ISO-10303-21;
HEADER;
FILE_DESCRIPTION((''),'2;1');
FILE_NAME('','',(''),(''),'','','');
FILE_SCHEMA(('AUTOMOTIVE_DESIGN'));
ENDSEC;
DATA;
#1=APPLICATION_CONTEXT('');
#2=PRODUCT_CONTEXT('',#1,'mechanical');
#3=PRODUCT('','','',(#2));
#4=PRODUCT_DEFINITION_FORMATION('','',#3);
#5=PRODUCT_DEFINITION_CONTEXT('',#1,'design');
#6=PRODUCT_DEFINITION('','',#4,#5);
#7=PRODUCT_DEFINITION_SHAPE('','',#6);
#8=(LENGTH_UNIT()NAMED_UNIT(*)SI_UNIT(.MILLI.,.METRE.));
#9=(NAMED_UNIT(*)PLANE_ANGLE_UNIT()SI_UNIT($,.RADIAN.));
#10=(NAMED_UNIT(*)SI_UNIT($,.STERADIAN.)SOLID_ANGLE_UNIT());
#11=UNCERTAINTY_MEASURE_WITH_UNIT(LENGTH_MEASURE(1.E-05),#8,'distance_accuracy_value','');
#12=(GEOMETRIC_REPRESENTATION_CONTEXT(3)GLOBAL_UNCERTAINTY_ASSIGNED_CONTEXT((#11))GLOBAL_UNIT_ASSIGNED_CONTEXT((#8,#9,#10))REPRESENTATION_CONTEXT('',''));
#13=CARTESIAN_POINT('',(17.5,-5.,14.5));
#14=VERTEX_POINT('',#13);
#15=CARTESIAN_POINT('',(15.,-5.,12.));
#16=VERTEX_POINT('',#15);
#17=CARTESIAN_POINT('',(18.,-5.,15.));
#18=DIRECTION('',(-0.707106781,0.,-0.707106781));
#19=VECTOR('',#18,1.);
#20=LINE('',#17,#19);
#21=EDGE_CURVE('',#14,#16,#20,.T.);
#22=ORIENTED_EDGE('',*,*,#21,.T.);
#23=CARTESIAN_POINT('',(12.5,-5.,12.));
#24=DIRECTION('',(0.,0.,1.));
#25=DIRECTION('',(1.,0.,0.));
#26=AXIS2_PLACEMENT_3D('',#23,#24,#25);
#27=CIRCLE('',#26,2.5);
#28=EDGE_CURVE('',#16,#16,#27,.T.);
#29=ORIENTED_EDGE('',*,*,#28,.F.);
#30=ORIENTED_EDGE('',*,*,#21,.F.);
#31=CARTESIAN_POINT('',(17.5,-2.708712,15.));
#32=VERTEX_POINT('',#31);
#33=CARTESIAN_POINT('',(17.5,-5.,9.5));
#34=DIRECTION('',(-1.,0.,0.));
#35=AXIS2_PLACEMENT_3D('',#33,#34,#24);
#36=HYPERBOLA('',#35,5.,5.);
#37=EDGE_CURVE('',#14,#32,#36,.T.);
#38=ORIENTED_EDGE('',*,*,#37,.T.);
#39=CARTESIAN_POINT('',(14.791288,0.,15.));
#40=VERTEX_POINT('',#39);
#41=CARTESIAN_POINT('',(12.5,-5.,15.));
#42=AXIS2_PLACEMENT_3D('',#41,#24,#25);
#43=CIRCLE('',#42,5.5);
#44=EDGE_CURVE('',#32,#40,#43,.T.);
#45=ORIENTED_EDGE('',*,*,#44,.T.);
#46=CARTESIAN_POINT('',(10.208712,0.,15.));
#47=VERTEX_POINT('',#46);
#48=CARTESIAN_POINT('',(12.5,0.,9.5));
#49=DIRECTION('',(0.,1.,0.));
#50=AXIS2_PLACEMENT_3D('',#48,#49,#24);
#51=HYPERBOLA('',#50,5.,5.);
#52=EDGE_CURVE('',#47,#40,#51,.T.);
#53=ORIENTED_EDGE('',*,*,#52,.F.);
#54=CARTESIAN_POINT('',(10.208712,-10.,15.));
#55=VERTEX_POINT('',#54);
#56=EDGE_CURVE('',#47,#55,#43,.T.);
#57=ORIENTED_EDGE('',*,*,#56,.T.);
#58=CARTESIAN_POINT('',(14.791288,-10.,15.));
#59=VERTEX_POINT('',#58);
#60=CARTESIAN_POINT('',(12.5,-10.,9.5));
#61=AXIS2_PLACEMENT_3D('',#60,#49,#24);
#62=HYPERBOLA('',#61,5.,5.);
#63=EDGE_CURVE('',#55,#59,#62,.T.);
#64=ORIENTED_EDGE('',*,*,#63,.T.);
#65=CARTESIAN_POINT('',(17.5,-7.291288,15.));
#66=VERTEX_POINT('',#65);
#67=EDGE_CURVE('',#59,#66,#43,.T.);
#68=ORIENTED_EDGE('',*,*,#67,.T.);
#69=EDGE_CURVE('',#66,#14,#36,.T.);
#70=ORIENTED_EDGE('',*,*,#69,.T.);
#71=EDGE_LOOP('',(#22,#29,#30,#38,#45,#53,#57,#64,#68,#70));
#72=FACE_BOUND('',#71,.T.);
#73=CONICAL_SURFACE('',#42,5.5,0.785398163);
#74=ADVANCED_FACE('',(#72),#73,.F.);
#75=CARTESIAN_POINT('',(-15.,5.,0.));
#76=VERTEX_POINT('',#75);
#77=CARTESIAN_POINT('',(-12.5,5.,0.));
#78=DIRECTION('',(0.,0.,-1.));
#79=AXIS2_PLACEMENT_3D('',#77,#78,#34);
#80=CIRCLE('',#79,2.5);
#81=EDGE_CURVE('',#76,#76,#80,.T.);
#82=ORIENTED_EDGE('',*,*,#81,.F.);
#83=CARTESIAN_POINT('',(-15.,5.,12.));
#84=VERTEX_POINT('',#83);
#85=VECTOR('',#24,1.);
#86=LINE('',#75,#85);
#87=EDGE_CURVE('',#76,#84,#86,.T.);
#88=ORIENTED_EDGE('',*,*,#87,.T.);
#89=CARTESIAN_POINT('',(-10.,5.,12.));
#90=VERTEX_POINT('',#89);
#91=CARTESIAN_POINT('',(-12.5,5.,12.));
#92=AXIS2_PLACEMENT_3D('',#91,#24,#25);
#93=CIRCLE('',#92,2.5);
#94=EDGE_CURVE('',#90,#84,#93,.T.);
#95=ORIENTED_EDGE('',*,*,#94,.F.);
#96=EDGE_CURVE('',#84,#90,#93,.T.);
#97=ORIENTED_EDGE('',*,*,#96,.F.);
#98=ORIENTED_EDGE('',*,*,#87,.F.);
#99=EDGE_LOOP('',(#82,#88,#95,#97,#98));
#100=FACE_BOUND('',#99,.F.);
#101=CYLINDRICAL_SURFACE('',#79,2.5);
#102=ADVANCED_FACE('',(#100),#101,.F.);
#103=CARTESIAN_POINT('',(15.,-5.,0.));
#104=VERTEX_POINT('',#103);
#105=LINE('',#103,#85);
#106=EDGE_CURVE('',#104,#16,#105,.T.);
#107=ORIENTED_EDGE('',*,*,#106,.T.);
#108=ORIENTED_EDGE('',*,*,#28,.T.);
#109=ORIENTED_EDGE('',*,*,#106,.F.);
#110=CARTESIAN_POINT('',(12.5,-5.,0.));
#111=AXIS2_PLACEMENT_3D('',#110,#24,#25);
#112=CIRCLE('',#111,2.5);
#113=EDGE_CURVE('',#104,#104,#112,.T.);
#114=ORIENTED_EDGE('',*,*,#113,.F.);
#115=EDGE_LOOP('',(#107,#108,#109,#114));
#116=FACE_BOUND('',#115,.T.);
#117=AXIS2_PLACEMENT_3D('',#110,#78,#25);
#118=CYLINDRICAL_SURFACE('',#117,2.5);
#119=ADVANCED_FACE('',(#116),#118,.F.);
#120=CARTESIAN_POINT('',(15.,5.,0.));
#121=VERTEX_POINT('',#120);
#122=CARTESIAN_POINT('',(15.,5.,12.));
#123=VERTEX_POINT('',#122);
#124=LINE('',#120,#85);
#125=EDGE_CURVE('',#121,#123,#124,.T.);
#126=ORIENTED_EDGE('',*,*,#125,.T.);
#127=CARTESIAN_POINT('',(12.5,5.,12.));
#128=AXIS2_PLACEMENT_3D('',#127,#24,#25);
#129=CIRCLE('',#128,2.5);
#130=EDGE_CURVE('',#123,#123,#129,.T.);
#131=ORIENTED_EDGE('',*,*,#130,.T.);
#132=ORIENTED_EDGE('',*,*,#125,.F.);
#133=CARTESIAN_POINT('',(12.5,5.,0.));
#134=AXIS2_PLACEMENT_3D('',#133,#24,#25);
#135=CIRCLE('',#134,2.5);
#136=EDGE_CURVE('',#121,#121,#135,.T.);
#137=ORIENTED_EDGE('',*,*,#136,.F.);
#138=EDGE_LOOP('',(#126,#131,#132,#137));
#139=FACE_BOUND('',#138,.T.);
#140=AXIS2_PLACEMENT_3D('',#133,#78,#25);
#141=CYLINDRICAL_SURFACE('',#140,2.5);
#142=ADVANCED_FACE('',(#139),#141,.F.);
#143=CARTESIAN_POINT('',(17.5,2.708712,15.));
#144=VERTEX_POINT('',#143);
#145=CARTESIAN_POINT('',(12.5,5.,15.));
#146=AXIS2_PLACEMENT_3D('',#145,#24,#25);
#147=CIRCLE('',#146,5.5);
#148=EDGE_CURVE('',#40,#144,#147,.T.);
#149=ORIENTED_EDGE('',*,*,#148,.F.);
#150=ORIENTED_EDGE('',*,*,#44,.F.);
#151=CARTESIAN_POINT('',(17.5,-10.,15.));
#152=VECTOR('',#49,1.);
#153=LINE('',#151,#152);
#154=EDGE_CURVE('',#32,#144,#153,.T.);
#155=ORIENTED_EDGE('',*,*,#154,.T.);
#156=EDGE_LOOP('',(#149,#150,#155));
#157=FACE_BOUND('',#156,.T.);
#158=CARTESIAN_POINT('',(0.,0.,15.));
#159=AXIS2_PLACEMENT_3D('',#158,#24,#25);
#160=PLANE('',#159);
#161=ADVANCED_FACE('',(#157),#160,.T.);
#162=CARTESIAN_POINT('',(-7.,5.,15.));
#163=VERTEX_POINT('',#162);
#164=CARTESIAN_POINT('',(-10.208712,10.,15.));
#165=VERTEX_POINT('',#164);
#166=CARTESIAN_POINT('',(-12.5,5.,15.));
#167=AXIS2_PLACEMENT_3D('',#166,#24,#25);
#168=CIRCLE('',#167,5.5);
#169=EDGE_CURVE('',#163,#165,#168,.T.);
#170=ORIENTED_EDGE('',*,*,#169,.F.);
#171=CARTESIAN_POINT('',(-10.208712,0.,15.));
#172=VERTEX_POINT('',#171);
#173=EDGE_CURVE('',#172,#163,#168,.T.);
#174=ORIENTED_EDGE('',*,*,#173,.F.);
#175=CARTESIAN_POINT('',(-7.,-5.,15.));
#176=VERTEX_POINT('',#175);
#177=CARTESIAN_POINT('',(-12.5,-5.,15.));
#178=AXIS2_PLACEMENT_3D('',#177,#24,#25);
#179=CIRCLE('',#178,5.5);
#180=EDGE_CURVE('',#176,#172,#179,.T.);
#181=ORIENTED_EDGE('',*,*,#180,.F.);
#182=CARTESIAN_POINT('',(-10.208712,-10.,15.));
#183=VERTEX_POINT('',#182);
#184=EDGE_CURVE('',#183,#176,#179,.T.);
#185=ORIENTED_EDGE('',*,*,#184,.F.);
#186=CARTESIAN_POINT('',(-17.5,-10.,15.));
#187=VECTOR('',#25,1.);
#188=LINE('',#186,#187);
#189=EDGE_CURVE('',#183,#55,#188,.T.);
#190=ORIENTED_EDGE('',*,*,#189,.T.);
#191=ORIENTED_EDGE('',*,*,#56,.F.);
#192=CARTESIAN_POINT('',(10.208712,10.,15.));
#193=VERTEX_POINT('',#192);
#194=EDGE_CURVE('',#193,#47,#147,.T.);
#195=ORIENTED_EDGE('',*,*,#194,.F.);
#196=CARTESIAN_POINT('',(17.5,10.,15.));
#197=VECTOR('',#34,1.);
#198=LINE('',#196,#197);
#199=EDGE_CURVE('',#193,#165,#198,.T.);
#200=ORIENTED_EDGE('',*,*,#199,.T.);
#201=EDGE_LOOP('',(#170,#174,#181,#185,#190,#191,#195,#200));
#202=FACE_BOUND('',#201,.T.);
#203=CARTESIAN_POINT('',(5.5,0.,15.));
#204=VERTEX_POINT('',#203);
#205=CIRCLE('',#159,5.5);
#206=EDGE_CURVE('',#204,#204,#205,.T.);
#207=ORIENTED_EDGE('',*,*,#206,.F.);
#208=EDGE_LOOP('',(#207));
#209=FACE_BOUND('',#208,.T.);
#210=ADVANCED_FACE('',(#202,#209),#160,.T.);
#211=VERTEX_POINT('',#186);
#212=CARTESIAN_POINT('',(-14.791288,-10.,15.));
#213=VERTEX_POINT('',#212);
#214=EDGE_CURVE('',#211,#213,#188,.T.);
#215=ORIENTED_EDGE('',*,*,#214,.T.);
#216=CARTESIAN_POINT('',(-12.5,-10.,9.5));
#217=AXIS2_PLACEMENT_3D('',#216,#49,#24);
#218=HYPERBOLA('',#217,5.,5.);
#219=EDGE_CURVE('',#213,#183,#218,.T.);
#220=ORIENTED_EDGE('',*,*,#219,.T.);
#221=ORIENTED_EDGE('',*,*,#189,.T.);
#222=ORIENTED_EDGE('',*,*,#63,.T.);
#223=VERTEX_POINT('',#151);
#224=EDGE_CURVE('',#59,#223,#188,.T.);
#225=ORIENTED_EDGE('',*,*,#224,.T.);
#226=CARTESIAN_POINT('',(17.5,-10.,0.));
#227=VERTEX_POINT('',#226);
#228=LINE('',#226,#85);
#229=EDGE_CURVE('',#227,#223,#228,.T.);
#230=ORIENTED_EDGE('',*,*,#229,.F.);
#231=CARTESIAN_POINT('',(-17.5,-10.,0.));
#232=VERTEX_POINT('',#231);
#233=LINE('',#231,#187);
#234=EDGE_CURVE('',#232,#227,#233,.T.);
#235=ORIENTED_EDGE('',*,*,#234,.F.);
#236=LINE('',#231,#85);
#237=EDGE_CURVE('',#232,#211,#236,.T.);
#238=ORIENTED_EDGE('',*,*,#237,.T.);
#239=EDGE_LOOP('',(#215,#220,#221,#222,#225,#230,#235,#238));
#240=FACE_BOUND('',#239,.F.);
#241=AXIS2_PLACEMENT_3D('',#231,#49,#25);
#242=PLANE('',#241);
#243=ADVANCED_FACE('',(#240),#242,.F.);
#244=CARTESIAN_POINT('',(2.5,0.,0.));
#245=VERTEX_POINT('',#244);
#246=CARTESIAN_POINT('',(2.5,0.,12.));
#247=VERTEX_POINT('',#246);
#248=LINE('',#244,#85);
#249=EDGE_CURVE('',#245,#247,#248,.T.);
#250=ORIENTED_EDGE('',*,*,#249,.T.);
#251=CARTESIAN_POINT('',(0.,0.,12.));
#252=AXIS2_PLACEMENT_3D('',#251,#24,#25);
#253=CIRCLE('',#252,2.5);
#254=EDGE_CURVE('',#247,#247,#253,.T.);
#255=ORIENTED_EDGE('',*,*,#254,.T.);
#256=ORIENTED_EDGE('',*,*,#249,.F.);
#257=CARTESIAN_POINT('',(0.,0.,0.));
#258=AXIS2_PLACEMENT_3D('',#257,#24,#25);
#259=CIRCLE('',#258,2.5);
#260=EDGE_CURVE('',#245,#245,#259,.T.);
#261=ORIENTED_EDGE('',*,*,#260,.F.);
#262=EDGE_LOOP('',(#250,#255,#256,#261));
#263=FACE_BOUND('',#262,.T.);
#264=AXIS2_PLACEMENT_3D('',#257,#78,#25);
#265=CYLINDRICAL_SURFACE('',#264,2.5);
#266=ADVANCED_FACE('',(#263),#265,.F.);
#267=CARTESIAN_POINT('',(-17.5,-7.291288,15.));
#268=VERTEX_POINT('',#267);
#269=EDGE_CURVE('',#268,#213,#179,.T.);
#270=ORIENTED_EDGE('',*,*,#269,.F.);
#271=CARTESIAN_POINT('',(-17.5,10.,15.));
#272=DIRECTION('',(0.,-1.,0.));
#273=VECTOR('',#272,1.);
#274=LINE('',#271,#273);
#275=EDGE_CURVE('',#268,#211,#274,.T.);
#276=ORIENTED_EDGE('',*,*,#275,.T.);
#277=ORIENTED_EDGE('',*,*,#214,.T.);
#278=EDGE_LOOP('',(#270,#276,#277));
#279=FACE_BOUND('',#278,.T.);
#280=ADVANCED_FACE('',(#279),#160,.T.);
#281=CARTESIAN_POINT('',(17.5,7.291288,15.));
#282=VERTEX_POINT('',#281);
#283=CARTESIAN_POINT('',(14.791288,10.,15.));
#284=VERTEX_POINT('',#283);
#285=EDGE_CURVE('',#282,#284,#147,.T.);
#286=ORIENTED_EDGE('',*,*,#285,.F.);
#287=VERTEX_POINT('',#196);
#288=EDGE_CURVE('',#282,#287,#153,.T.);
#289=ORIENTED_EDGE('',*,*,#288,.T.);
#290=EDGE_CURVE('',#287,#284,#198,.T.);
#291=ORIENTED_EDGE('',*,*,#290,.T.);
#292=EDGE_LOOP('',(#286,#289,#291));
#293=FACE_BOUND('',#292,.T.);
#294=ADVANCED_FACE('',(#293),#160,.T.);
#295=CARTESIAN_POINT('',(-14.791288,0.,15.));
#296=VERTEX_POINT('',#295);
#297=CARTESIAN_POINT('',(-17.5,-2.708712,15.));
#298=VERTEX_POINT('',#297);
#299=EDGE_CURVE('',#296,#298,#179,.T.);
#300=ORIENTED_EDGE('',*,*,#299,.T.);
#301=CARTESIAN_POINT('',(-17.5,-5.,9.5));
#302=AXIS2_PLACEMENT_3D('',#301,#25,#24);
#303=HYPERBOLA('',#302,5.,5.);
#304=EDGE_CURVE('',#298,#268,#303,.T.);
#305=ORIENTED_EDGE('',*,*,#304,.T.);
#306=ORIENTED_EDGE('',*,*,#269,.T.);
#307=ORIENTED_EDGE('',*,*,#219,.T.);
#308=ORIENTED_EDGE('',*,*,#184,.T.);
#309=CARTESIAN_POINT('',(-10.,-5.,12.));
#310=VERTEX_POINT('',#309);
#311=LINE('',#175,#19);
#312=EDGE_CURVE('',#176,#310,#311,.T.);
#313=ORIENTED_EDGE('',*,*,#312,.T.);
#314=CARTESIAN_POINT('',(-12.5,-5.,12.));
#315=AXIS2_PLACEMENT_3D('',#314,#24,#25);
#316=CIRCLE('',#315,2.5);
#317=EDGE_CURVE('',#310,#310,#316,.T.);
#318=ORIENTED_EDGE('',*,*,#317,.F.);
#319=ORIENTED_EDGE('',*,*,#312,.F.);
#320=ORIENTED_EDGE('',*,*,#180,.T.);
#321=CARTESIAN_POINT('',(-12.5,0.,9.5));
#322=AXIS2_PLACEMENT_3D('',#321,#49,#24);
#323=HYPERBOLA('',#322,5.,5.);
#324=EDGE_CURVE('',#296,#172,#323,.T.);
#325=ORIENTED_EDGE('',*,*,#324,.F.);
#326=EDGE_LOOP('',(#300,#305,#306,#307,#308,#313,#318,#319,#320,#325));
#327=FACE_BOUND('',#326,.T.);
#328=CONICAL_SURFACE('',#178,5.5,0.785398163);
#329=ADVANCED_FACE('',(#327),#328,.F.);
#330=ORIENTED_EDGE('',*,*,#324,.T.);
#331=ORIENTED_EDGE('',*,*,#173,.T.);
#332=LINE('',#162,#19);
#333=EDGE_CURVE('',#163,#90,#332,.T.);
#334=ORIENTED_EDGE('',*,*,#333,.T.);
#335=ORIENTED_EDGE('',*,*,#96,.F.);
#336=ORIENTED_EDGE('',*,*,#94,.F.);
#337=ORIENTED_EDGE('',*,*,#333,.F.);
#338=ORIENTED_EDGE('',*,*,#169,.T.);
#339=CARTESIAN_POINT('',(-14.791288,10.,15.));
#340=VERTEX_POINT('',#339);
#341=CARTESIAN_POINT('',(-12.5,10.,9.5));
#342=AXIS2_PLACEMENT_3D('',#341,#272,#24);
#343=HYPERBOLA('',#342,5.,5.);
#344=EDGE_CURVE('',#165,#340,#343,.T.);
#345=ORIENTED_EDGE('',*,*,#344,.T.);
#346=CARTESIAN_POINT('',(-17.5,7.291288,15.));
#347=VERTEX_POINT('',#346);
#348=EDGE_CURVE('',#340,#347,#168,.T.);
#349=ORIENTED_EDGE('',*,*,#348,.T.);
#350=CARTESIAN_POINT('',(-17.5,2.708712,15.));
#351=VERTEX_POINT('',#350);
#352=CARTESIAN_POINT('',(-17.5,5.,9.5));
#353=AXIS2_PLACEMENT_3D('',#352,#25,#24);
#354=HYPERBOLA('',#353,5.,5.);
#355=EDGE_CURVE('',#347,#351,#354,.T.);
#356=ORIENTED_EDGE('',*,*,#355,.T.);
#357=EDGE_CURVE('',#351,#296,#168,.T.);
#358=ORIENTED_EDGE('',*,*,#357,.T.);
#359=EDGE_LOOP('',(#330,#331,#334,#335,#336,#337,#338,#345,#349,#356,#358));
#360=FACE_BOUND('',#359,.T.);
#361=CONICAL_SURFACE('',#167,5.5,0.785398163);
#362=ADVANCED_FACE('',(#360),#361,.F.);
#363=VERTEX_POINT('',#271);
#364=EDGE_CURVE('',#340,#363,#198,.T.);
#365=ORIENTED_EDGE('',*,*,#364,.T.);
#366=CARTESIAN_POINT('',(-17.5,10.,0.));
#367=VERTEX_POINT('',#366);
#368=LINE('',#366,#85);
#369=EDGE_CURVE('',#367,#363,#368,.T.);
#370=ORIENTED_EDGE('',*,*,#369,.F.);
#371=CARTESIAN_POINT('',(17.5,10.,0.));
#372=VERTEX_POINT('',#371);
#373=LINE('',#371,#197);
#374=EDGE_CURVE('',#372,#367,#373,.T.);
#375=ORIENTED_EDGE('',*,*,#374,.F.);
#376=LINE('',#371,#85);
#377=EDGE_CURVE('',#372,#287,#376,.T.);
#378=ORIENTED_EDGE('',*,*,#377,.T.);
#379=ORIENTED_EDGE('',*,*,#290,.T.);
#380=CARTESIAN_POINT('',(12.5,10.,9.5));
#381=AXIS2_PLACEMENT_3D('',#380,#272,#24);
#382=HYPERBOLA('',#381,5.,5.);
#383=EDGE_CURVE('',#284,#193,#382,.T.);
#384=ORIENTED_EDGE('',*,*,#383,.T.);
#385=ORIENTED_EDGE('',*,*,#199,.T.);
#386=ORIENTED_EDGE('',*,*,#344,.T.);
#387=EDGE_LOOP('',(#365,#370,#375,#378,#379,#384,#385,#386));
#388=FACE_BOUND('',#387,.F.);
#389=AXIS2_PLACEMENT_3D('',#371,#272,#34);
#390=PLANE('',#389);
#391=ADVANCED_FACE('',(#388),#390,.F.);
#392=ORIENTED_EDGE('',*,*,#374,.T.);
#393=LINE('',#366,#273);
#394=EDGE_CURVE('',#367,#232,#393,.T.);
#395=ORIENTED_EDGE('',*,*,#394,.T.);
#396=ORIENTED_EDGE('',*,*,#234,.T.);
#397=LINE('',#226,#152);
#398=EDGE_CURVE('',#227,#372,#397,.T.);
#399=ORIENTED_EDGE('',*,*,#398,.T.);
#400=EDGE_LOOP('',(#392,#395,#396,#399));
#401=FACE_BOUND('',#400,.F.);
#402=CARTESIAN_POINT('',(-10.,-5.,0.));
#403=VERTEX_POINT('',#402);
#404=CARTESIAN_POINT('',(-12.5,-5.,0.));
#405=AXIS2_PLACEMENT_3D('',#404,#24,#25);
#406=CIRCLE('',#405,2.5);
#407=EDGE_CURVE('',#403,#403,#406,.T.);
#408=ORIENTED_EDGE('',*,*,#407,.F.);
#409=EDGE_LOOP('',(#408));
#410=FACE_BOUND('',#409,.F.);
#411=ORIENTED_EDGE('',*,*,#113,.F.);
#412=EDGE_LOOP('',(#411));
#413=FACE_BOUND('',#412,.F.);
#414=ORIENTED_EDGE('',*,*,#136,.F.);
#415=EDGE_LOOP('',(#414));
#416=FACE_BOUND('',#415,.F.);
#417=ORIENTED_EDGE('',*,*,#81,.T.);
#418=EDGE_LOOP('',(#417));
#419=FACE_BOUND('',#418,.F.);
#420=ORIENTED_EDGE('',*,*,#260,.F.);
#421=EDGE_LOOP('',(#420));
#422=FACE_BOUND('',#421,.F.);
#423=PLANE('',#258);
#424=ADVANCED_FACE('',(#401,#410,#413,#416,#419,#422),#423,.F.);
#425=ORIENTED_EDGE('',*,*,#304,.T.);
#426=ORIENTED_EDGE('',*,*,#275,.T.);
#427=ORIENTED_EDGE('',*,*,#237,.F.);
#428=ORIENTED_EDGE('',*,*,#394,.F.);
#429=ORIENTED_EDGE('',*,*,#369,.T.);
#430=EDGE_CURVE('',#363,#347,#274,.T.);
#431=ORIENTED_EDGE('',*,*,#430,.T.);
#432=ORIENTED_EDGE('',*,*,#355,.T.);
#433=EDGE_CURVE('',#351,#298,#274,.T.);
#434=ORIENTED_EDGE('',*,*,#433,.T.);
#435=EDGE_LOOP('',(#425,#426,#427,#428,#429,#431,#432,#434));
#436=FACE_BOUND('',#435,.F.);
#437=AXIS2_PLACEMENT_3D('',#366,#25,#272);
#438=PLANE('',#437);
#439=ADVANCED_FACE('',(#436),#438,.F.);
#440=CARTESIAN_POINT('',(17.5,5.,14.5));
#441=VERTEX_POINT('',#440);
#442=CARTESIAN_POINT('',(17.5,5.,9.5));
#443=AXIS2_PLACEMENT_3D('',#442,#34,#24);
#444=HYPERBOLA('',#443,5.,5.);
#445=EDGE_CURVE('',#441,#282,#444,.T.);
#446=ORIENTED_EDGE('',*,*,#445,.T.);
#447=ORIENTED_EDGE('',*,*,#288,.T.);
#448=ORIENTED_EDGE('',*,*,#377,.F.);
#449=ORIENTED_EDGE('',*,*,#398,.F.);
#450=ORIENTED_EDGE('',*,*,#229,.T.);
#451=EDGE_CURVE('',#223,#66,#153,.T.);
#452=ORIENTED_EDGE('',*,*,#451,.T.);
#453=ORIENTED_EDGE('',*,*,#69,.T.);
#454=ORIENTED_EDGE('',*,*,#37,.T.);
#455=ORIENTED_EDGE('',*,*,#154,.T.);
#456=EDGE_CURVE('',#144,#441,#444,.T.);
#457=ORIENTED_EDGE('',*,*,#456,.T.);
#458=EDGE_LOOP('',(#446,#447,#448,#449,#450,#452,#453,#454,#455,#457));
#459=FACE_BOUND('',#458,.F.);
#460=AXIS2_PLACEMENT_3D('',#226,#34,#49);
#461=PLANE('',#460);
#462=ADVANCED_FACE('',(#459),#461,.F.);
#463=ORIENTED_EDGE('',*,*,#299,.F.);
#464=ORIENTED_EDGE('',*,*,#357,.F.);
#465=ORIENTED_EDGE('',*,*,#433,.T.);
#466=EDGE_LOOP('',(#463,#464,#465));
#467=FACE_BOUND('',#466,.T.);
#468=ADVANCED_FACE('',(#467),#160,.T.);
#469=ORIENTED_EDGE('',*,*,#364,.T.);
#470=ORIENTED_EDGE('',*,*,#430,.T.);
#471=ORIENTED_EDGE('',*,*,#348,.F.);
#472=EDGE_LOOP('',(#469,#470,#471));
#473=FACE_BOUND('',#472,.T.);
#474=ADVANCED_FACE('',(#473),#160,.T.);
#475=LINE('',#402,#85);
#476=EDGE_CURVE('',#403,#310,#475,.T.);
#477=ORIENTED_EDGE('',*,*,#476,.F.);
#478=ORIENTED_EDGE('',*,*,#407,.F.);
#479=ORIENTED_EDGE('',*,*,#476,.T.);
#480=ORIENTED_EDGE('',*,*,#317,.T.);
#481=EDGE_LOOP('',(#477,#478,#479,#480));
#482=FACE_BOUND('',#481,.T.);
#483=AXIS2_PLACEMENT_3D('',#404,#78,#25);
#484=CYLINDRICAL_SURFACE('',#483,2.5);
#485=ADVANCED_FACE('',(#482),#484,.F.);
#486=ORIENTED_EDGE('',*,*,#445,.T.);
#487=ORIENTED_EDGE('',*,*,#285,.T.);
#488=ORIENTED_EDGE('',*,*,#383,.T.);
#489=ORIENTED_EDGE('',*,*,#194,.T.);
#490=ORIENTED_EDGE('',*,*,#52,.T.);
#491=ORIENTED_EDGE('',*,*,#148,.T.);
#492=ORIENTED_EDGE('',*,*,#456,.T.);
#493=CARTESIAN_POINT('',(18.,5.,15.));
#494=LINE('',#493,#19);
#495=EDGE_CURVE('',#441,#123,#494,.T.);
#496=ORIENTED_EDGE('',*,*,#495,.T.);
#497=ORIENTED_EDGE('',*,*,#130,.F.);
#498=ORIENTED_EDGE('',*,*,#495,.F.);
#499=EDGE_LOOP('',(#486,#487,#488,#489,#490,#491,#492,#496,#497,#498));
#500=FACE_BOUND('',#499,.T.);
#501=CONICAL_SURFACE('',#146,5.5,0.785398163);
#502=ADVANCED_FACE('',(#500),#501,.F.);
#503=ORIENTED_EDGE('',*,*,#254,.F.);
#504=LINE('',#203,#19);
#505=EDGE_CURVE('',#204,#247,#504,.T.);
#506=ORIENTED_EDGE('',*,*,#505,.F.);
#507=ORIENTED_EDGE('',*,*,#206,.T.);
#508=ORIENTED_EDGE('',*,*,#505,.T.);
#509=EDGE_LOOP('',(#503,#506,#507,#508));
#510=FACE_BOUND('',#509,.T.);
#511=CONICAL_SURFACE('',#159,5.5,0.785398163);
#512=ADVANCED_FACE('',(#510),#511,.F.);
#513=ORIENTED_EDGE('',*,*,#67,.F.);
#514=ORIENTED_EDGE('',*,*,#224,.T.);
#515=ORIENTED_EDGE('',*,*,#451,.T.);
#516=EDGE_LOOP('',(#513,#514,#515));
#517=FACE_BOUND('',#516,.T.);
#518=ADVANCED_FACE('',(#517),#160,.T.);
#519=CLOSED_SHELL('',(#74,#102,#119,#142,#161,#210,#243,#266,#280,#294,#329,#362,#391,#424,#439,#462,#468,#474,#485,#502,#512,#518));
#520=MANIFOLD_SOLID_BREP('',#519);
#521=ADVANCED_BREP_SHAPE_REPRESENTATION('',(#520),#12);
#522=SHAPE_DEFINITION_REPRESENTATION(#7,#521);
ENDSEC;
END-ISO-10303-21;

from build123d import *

# Parameters (mm, degrees)
F0_R     = 2.5
F1_DEPTH = 15


# Not quite as in the source:
# - a fillet or chamfer that OpenCascade refuses, or shapes differently, is made with other operations: its cross-section is extruded or revolved along the edge and cut away or added


with BuildPart() as f1:
    # F0 (on Top) → F1 (new body)
    with BuildSketch(Plane.XY):
        Polygon((-7.5, 10), (-17.5, 10), (-17.5, 5), (-17.5, -10), (17.5, -10), (17.5, 10), align=None)
        with Locations((-12.5, -5)):
            Circle(F0_R, mode=Mode.SUBTRACT)
        with Locations((12.5, -5)):
            Circle(F0_R, mode=Mode.SUBTRACT)
        with BuildLine():
            ThreePointArc((-10, 5), (-12.5, 2.5), (-15, 5))
            ThreePointArc((-15, 5), (-12.5, 7.5), (-10, 5))
        make_face(mode=Mode.SUBTRACT)
        Circle(F0_R, mode=Mode.SUBTRACT)
        with Locations((12.5, 5)):
            Circle(F0_R, mode=Mode.SUBTRACT)
    extrude(amount=F1_DEPTH)

    # F2: chamfer of 3 on 5 edges, made by hand

    # F2_s1 → F2_t2 (revolve, cut)
    with BuildSketch(Plane.XZ.offset(-5)):
        Polygon((-7, 15), (-10, 12), (-10, 15), align=None)
    revolve(axis=Axis((-12.5, 5, 15), (0, 0, 1)), mode=Mode.SUBTRACT)

    # F2_s3 → F2_t4 (revolve, cut)
    with BuildSketch(Plane.XZ):
        Polygon((5.5, 15), (2.5, 12), (2.5, 15), align=None)
    revolve(axis=Axis((0, 0, 15), (0, 0, 1)), mode=Mode.SUBTRACT)

    # F2_s5 → F2_t6 (revolve, cut)
    with BuildSketch(Plane.XZ.offset(5)):
        Polygon((-7, 15), (-10, 12), (-10, 15), align=None)
    revolve(axis=Axis((-12.5, -5, 15), (0, 0, 1)), mode=Mode.SUBTRACT)

    # F2_s7 → F2_t8 (revolve, cut)
    with BuildSketch(Plane.XZ.offset(-5)):
        Polygon((18, 15), (15, 12), (15, 15), align=None)
    revolve(axis=Axis((12.5, 5, 15), (0, 0, 1)), mode=Mode.SUBTRACT)

    # F2_s9 → F2_t10 (revolve, cut)
    with BuildSketch(Plane.XZ.offset(5)):
        Polygon((18, 15), (15, 12), (15, 15), align=None)
    revolve(axis=Axis((12.5, -5, 15), (0, 0, 1)), mode=Mode.SUBTRACT)


solid = f1.part
